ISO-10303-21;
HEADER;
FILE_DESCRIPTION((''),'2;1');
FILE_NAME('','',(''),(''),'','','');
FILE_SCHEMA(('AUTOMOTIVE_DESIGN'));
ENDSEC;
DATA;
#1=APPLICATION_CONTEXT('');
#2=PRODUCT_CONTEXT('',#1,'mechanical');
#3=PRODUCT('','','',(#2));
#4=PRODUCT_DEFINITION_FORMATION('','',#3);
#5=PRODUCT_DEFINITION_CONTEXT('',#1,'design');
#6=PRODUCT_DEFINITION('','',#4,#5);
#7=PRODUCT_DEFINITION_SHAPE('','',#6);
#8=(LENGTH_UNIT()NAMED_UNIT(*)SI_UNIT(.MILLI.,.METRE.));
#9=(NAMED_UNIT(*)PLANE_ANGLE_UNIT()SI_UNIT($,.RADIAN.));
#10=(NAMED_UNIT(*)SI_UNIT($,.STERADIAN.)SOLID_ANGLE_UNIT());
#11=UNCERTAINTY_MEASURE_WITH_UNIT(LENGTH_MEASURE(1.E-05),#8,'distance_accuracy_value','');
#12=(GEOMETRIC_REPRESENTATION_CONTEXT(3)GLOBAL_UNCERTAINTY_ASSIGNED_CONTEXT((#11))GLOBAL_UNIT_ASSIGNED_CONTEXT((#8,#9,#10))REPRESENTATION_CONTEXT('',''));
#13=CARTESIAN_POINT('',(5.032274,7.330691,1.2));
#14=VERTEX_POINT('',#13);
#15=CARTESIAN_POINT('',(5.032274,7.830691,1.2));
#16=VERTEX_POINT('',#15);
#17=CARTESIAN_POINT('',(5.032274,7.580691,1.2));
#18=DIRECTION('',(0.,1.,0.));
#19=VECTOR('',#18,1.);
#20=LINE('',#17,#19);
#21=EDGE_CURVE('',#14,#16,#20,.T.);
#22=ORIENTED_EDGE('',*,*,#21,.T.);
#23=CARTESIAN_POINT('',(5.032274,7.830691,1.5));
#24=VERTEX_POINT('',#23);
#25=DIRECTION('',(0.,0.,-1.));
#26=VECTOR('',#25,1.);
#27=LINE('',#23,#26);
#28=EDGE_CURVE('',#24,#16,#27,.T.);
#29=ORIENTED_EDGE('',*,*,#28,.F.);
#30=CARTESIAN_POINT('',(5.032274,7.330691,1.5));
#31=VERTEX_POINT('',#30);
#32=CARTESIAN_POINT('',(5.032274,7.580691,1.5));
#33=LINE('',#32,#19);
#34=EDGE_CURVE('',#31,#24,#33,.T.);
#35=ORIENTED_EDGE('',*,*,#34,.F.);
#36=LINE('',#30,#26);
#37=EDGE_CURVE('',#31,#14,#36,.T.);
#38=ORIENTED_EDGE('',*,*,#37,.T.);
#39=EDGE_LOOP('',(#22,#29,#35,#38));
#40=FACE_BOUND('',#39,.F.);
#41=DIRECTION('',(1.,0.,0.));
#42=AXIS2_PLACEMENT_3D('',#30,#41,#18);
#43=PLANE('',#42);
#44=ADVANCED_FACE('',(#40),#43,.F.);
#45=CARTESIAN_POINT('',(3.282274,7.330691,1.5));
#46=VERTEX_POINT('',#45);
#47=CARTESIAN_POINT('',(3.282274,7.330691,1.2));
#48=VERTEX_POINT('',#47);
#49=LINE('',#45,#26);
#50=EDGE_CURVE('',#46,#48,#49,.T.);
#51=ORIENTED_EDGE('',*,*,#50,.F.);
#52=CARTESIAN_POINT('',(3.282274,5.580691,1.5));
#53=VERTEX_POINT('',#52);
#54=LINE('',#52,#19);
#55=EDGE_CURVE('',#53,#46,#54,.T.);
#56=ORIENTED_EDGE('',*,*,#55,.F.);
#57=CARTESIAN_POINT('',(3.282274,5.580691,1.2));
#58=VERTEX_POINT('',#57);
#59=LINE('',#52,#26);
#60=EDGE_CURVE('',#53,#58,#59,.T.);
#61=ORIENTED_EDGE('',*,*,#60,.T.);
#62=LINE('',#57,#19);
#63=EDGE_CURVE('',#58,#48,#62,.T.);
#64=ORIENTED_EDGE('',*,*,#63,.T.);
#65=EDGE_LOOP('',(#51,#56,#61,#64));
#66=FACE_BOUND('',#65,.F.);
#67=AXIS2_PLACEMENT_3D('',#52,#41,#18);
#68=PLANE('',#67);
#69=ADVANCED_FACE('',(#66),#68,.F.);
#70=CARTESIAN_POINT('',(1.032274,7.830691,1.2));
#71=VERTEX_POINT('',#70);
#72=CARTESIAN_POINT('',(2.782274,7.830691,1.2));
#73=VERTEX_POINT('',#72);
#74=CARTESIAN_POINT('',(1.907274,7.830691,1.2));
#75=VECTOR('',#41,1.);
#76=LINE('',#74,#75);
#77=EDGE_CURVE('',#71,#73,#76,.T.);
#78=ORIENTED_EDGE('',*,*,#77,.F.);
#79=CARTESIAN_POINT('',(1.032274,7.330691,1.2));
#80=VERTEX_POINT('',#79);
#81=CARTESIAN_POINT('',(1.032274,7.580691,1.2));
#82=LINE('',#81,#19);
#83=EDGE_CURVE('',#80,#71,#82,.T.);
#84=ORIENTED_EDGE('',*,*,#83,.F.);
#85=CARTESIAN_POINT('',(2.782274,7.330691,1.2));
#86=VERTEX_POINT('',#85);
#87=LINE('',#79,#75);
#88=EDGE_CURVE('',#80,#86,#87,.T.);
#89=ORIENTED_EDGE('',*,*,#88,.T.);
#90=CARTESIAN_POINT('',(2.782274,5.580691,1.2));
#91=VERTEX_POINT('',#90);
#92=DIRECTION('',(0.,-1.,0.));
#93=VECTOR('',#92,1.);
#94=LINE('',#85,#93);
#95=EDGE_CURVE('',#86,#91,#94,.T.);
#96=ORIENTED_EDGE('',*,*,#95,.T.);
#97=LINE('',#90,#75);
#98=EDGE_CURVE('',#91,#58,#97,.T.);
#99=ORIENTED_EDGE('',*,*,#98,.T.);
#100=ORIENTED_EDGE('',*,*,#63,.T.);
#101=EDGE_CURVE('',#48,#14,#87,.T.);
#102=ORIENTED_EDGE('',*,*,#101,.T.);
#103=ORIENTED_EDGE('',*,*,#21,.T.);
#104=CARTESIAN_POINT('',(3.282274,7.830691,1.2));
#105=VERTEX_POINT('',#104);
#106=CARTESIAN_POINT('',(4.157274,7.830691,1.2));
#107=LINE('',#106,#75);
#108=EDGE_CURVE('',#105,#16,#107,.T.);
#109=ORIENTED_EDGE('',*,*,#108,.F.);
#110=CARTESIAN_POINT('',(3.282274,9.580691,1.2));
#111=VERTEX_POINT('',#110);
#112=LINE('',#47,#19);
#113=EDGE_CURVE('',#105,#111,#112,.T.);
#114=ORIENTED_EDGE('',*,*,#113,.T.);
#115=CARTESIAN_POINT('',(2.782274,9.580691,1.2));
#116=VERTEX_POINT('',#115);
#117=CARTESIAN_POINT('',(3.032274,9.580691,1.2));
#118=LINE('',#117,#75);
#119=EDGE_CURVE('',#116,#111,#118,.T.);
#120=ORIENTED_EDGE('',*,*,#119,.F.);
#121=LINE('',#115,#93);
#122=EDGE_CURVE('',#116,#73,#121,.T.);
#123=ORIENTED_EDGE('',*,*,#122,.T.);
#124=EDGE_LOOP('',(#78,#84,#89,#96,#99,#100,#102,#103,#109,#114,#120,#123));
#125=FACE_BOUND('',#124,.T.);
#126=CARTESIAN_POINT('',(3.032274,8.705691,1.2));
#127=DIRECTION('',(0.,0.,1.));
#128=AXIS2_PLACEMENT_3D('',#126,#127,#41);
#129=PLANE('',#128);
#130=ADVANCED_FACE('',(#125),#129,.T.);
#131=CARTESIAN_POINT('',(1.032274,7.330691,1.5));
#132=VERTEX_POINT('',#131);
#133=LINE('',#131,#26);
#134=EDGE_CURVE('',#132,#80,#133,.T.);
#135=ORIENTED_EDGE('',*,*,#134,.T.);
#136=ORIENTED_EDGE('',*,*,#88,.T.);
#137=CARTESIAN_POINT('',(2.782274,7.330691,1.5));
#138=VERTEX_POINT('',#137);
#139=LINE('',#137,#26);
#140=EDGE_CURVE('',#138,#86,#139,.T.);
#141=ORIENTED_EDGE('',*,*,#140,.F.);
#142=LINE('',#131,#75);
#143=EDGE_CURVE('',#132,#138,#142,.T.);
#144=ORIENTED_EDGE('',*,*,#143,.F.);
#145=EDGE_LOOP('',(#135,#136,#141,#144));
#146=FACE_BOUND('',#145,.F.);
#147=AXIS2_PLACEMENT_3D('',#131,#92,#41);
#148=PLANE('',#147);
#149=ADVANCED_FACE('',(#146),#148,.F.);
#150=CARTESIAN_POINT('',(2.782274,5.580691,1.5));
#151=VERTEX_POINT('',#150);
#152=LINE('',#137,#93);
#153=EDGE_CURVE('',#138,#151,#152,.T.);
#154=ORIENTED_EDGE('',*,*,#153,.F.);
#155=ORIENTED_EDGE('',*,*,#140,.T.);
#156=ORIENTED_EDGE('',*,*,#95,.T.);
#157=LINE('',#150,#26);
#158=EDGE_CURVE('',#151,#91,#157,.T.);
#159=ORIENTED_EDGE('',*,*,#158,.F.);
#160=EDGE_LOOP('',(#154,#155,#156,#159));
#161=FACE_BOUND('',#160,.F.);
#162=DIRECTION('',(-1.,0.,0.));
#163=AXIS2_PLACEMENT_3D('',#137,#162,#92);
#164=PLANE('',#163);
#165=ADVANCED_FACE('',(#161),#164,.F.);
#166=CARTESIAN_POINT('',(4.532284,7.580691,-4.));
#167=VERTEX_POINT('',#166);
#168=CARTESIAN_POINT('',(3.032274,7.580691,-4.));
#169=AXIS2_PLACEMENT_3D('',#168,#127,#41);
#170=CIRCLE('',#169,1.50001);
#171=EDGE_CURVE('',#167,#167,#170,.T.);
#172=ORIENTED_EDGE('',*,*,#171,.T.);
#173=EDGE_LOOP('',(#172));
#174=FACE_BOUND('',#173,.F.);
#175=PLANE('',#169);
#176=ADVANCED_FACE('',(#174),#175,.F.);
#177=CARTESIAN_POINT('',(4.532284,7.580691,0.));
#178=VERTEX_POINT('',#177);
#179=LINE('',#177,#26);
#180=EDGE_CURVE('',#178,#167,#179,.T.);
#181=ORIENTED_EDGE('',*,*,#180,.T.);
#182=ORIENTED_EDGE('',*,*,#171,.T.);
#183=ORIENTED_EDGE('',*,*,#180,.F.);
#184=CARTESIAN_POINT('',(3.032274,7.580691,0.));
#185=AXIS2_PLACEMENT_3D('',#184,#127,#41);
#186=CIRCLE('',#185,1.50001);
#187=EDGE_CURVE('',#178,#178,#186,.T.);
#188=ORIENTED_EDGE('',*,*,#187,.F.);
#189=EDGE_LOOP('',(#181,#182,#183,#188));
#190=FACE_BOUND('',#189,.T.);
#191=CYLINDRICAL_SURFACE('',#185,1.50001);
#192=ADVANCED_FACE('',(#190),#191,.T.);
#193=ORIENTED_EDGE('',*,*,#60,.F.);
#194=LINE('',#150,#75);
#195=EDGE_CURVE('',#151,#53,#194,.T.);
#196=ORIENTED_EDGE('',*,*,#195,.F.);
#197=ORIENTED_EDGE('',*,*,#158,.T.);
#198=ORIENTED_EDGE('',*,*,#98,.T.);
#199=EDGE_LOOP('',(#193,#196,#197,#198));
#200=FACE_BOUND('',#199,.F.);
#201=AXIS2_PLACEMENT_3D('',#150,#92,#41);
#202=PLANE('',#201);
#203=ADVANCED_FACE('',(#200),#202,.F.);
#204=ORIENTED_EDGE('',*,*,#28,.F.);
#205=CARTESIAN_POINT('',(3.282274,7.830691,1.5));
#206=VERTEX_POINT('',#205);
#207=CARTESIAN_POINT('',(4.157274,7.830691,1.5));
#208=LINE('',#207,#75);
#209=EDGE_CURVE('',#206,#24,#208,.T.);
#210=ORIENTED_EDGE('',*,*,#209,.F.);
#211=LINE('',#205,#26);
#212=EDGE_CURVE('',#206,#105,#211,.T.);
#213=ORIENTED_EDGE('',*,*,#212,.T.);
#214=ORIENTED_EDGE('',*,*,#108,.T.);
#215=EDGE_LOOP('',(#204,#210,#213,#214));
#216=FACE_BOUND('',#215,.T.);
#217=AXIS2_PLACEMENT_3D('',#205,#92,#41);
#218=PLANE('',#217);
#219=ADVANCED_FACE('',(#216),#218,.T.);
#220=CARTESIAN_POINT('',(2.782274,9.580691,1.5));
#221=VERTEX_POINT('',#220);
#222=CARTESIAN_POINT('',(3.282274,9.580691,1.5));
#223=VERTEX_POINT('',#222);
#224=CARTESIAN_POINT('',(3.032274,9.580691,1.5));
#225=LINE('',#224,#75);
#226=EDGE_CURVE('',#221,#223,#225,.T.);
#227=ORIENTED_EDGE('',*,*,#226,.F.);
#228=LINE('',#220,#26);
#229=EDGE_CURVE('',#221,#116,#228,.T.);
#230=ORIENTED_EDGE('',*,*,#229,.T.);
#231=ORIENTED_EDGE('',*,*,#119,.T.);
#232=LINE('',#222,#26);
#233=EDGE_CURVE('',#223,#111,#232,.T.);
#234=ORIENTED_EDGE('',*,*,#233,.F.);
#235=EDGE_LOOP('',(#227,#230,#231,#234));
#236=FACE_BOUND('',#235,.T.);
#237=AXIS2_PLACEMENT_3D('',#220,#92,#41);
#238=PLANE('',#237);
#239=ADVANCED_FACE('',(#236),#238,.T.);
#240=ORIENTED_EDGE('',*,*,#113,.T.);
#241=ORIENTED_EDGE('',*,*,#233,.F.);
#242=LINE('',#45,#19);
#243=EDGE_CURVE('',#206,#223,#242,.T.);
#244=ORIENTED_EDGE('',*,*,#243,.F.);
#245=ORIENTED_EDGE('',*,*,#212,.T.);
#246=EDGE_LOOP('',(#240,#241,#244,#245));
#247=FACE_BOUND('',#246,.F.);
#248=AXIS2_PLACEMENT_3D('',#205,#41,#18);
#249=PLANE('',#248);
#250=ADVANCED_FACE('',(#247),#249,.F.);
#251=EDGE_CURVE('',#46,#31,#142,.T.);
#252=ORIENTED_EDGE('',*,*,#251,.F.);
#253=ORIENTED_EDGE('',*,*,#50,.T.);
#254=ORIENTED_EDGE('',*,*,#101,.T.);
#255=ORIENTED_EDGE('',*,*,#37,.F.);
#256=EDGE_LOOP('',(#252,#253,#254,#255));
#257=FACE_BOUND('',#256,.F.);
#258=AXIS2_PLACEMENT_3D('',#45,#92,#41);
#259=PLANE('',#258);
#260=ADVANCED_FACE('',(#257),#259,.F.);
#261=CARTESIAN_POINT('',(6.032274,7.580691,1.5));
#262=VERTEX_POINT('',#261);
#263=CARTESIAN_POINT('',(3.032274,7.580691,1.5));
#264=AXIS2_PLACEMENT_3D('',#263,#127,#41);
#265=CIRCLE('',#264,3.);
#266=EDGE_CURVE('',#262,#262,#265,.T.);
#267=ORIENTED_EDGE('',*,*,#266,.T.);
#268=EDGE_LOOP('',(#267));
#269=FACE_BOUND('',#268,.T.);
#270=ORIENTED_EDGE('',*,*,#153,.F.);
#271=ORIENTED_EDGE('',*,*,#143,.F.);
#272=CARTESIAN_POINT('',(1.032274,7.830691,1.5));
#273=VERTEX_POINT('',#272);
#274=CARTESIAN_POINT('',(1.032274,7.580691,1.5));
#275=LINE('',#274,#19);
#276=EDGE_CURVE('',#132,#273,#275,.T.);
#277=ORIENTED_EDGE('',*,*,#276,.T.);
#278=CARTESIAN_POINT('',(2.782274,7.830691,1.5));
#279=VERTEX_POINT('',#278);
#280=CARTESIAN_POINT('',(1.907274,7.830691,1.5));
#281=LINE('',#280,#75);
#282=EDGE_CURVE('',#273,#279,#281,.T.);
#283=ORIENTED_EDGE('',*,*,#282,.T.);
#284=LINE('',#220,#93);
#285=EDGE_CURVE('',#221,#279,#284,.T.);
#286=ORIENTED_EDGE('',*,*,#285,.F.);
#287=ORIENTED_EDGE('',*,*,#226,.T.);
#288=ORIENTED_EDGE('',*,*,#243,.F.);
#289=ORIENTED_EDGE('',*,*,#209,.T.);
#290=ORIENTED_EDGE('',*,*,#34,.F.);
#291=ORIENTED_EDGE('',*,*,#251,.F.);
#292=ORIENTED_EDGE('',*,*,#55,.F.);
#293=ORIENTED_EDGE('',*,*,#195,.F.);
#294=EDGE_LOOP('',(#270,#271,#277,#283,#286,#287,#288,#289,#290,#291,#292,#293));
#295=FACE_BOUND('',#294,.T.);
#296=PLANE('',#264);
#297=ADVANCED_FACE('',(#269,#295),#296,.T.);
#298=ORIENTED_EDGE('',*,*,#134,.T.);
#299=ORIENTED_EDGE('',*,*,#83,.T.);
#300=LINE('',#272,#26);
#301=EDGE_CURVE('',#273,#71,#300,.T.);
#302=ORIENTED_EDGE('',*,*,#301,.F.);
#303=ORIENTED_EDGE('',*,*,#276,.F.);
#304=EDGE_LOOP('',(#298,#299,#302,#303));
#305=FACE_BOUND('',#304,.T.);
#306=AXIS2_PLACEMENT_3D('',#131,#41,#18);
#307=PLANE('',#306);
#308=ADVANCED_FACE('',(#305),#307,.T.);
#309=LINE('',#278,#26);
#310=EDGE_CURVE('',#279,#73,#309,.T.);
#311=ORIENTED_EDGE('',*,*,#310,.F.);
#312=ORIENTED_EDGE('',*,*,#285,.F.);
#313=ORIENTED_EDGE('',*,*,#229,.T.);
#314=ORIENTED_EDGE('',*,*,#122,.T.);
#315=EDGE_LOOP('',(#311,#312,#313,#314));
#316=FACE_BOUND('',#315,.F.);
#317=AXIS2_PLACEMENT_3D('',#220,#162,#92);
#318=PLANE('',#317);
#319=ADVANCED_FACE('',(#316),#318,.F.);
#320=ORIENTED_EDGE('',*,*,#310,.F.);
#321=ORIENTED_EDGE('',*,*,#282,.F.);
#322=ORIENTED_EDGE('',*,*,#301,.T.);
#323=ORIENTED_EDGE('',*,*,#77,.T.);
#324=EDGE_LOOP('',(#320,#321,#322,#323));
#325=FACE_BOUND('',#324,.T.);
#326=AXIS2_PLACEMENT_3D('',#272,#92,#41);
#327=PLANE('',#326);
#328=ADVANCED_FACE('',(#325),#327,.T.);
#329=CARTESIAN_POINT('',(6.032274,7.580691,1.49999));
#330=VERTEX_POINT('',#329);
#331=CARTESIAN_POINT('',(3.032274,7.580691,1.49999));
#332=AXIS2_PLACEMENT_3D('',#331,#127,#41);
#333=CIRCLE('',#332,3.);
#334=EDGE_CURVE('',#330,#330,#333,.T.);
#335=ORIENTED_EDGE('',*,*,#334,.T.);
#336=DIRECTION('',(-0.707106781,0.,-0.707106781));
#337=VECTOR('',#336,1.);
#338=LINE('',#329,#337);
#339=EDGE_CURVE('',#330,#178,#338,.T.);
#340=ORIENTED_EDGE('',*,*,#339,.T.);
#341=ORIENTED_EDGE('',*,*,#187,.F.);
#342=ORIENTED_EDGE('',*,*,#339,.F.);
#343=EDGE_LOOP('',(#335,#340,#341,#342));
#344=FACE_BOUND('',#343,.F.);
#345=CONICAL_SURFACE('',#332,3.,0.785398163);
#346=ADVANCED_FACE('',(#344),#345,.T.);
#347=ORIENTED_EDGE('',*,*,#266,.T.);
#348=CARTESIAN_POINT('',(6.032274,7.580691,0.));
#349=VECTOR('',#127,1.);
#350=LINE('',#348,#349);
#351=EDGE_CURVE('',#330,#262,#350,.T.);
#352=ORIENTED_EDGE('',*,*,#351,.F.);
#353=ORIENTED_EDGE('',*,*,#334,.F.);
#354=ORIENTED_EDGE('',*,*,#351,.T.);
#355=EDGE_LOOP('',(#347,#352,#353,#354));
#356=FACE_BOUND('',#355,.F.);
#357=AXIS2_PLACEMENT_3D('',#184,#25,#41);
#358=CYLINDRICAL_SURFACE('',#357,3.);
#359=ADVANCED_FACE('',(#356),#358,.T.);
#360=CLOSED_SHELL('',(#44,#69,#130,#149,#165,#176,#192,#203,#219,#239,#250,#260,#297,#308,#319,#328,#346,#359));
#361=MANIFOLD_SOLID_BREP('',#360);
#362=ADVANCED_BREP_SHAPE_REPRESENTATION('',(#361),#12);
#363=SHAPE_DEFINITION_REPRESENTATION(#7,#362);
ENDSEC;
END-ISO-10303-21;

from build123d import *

# Parameters (mm, degrees)
F0_R     = 3
F1_DEPTH = 1.5
F2_SIZE  = 1.49999
F3_W     = 0.5
F3_H     = 1.75
F3_H_2   = 0.5
F3_W_2   = 1.75
F4_DEPTH = 0.3
F5_DEPTH = 4


# Not quite as in the source:
# - a fillet or chamfer is up to 0.001 mm smaller than in the source, because OpenCascade refuses the exact size


with BuildPart() as f1:
    # F0 (on Top) → F1 (new body)
    with BuildSketch(Plane.XY):
        with Locations((3.0322743114, 7.5806910172)):
            Circle(F0_R)
    extrude(amount=F1_DEPTH)

    # F2 (size 1.5 in the source; OpenCascade refuses exactly that, so slightly less here)
    f2_edges = [f1.edges().sort_by_distance(p)[0] for p in [
        (0.032274, 7.580691, 0),
    ]]
    chamfer(f2_edges, length=F2_SIZE)

    # F3 (on face) → F4 (cut)
    with BuildSketch(Plane.XY.offset(1.5)):
        with Locations((3.0322743114, 8.7056910172)):
            Rectangle(F3_W, F3_H)
        with Locations((3.0322743114, 7.5806910172)):
            Rectangle(F3_W, F3_H_2)
        with Locations((1.9072743114, 7.5806910172)):
            Rectangle(F3_W_2, F3_H_2)
        with Locations((4.1572743114, 7.5806910172)):
            Rectangle(F3_W_2, F3_H_2)
        Polygon((3.2822743114, 7.3306910172), (2.7822743114, 7.3306910172), (2.7822743114, 5.5806910172), (3.0322743114, 5.5806910172), (3.2822743114, 5.5806910172), align=None)
    extrude(amount=-F4_DEPTH, mode=Mode.SUBTRACT)

    # F5 (add): a face of the model
    f5_faces = [f1.faces().sort_by_distance(p)[0] for p in [
        (3.0322743114, 7.5806910172, 0),
    ]]
    extrude(f5_faces, amount=F5_DEPTH)


solid = f1.part
